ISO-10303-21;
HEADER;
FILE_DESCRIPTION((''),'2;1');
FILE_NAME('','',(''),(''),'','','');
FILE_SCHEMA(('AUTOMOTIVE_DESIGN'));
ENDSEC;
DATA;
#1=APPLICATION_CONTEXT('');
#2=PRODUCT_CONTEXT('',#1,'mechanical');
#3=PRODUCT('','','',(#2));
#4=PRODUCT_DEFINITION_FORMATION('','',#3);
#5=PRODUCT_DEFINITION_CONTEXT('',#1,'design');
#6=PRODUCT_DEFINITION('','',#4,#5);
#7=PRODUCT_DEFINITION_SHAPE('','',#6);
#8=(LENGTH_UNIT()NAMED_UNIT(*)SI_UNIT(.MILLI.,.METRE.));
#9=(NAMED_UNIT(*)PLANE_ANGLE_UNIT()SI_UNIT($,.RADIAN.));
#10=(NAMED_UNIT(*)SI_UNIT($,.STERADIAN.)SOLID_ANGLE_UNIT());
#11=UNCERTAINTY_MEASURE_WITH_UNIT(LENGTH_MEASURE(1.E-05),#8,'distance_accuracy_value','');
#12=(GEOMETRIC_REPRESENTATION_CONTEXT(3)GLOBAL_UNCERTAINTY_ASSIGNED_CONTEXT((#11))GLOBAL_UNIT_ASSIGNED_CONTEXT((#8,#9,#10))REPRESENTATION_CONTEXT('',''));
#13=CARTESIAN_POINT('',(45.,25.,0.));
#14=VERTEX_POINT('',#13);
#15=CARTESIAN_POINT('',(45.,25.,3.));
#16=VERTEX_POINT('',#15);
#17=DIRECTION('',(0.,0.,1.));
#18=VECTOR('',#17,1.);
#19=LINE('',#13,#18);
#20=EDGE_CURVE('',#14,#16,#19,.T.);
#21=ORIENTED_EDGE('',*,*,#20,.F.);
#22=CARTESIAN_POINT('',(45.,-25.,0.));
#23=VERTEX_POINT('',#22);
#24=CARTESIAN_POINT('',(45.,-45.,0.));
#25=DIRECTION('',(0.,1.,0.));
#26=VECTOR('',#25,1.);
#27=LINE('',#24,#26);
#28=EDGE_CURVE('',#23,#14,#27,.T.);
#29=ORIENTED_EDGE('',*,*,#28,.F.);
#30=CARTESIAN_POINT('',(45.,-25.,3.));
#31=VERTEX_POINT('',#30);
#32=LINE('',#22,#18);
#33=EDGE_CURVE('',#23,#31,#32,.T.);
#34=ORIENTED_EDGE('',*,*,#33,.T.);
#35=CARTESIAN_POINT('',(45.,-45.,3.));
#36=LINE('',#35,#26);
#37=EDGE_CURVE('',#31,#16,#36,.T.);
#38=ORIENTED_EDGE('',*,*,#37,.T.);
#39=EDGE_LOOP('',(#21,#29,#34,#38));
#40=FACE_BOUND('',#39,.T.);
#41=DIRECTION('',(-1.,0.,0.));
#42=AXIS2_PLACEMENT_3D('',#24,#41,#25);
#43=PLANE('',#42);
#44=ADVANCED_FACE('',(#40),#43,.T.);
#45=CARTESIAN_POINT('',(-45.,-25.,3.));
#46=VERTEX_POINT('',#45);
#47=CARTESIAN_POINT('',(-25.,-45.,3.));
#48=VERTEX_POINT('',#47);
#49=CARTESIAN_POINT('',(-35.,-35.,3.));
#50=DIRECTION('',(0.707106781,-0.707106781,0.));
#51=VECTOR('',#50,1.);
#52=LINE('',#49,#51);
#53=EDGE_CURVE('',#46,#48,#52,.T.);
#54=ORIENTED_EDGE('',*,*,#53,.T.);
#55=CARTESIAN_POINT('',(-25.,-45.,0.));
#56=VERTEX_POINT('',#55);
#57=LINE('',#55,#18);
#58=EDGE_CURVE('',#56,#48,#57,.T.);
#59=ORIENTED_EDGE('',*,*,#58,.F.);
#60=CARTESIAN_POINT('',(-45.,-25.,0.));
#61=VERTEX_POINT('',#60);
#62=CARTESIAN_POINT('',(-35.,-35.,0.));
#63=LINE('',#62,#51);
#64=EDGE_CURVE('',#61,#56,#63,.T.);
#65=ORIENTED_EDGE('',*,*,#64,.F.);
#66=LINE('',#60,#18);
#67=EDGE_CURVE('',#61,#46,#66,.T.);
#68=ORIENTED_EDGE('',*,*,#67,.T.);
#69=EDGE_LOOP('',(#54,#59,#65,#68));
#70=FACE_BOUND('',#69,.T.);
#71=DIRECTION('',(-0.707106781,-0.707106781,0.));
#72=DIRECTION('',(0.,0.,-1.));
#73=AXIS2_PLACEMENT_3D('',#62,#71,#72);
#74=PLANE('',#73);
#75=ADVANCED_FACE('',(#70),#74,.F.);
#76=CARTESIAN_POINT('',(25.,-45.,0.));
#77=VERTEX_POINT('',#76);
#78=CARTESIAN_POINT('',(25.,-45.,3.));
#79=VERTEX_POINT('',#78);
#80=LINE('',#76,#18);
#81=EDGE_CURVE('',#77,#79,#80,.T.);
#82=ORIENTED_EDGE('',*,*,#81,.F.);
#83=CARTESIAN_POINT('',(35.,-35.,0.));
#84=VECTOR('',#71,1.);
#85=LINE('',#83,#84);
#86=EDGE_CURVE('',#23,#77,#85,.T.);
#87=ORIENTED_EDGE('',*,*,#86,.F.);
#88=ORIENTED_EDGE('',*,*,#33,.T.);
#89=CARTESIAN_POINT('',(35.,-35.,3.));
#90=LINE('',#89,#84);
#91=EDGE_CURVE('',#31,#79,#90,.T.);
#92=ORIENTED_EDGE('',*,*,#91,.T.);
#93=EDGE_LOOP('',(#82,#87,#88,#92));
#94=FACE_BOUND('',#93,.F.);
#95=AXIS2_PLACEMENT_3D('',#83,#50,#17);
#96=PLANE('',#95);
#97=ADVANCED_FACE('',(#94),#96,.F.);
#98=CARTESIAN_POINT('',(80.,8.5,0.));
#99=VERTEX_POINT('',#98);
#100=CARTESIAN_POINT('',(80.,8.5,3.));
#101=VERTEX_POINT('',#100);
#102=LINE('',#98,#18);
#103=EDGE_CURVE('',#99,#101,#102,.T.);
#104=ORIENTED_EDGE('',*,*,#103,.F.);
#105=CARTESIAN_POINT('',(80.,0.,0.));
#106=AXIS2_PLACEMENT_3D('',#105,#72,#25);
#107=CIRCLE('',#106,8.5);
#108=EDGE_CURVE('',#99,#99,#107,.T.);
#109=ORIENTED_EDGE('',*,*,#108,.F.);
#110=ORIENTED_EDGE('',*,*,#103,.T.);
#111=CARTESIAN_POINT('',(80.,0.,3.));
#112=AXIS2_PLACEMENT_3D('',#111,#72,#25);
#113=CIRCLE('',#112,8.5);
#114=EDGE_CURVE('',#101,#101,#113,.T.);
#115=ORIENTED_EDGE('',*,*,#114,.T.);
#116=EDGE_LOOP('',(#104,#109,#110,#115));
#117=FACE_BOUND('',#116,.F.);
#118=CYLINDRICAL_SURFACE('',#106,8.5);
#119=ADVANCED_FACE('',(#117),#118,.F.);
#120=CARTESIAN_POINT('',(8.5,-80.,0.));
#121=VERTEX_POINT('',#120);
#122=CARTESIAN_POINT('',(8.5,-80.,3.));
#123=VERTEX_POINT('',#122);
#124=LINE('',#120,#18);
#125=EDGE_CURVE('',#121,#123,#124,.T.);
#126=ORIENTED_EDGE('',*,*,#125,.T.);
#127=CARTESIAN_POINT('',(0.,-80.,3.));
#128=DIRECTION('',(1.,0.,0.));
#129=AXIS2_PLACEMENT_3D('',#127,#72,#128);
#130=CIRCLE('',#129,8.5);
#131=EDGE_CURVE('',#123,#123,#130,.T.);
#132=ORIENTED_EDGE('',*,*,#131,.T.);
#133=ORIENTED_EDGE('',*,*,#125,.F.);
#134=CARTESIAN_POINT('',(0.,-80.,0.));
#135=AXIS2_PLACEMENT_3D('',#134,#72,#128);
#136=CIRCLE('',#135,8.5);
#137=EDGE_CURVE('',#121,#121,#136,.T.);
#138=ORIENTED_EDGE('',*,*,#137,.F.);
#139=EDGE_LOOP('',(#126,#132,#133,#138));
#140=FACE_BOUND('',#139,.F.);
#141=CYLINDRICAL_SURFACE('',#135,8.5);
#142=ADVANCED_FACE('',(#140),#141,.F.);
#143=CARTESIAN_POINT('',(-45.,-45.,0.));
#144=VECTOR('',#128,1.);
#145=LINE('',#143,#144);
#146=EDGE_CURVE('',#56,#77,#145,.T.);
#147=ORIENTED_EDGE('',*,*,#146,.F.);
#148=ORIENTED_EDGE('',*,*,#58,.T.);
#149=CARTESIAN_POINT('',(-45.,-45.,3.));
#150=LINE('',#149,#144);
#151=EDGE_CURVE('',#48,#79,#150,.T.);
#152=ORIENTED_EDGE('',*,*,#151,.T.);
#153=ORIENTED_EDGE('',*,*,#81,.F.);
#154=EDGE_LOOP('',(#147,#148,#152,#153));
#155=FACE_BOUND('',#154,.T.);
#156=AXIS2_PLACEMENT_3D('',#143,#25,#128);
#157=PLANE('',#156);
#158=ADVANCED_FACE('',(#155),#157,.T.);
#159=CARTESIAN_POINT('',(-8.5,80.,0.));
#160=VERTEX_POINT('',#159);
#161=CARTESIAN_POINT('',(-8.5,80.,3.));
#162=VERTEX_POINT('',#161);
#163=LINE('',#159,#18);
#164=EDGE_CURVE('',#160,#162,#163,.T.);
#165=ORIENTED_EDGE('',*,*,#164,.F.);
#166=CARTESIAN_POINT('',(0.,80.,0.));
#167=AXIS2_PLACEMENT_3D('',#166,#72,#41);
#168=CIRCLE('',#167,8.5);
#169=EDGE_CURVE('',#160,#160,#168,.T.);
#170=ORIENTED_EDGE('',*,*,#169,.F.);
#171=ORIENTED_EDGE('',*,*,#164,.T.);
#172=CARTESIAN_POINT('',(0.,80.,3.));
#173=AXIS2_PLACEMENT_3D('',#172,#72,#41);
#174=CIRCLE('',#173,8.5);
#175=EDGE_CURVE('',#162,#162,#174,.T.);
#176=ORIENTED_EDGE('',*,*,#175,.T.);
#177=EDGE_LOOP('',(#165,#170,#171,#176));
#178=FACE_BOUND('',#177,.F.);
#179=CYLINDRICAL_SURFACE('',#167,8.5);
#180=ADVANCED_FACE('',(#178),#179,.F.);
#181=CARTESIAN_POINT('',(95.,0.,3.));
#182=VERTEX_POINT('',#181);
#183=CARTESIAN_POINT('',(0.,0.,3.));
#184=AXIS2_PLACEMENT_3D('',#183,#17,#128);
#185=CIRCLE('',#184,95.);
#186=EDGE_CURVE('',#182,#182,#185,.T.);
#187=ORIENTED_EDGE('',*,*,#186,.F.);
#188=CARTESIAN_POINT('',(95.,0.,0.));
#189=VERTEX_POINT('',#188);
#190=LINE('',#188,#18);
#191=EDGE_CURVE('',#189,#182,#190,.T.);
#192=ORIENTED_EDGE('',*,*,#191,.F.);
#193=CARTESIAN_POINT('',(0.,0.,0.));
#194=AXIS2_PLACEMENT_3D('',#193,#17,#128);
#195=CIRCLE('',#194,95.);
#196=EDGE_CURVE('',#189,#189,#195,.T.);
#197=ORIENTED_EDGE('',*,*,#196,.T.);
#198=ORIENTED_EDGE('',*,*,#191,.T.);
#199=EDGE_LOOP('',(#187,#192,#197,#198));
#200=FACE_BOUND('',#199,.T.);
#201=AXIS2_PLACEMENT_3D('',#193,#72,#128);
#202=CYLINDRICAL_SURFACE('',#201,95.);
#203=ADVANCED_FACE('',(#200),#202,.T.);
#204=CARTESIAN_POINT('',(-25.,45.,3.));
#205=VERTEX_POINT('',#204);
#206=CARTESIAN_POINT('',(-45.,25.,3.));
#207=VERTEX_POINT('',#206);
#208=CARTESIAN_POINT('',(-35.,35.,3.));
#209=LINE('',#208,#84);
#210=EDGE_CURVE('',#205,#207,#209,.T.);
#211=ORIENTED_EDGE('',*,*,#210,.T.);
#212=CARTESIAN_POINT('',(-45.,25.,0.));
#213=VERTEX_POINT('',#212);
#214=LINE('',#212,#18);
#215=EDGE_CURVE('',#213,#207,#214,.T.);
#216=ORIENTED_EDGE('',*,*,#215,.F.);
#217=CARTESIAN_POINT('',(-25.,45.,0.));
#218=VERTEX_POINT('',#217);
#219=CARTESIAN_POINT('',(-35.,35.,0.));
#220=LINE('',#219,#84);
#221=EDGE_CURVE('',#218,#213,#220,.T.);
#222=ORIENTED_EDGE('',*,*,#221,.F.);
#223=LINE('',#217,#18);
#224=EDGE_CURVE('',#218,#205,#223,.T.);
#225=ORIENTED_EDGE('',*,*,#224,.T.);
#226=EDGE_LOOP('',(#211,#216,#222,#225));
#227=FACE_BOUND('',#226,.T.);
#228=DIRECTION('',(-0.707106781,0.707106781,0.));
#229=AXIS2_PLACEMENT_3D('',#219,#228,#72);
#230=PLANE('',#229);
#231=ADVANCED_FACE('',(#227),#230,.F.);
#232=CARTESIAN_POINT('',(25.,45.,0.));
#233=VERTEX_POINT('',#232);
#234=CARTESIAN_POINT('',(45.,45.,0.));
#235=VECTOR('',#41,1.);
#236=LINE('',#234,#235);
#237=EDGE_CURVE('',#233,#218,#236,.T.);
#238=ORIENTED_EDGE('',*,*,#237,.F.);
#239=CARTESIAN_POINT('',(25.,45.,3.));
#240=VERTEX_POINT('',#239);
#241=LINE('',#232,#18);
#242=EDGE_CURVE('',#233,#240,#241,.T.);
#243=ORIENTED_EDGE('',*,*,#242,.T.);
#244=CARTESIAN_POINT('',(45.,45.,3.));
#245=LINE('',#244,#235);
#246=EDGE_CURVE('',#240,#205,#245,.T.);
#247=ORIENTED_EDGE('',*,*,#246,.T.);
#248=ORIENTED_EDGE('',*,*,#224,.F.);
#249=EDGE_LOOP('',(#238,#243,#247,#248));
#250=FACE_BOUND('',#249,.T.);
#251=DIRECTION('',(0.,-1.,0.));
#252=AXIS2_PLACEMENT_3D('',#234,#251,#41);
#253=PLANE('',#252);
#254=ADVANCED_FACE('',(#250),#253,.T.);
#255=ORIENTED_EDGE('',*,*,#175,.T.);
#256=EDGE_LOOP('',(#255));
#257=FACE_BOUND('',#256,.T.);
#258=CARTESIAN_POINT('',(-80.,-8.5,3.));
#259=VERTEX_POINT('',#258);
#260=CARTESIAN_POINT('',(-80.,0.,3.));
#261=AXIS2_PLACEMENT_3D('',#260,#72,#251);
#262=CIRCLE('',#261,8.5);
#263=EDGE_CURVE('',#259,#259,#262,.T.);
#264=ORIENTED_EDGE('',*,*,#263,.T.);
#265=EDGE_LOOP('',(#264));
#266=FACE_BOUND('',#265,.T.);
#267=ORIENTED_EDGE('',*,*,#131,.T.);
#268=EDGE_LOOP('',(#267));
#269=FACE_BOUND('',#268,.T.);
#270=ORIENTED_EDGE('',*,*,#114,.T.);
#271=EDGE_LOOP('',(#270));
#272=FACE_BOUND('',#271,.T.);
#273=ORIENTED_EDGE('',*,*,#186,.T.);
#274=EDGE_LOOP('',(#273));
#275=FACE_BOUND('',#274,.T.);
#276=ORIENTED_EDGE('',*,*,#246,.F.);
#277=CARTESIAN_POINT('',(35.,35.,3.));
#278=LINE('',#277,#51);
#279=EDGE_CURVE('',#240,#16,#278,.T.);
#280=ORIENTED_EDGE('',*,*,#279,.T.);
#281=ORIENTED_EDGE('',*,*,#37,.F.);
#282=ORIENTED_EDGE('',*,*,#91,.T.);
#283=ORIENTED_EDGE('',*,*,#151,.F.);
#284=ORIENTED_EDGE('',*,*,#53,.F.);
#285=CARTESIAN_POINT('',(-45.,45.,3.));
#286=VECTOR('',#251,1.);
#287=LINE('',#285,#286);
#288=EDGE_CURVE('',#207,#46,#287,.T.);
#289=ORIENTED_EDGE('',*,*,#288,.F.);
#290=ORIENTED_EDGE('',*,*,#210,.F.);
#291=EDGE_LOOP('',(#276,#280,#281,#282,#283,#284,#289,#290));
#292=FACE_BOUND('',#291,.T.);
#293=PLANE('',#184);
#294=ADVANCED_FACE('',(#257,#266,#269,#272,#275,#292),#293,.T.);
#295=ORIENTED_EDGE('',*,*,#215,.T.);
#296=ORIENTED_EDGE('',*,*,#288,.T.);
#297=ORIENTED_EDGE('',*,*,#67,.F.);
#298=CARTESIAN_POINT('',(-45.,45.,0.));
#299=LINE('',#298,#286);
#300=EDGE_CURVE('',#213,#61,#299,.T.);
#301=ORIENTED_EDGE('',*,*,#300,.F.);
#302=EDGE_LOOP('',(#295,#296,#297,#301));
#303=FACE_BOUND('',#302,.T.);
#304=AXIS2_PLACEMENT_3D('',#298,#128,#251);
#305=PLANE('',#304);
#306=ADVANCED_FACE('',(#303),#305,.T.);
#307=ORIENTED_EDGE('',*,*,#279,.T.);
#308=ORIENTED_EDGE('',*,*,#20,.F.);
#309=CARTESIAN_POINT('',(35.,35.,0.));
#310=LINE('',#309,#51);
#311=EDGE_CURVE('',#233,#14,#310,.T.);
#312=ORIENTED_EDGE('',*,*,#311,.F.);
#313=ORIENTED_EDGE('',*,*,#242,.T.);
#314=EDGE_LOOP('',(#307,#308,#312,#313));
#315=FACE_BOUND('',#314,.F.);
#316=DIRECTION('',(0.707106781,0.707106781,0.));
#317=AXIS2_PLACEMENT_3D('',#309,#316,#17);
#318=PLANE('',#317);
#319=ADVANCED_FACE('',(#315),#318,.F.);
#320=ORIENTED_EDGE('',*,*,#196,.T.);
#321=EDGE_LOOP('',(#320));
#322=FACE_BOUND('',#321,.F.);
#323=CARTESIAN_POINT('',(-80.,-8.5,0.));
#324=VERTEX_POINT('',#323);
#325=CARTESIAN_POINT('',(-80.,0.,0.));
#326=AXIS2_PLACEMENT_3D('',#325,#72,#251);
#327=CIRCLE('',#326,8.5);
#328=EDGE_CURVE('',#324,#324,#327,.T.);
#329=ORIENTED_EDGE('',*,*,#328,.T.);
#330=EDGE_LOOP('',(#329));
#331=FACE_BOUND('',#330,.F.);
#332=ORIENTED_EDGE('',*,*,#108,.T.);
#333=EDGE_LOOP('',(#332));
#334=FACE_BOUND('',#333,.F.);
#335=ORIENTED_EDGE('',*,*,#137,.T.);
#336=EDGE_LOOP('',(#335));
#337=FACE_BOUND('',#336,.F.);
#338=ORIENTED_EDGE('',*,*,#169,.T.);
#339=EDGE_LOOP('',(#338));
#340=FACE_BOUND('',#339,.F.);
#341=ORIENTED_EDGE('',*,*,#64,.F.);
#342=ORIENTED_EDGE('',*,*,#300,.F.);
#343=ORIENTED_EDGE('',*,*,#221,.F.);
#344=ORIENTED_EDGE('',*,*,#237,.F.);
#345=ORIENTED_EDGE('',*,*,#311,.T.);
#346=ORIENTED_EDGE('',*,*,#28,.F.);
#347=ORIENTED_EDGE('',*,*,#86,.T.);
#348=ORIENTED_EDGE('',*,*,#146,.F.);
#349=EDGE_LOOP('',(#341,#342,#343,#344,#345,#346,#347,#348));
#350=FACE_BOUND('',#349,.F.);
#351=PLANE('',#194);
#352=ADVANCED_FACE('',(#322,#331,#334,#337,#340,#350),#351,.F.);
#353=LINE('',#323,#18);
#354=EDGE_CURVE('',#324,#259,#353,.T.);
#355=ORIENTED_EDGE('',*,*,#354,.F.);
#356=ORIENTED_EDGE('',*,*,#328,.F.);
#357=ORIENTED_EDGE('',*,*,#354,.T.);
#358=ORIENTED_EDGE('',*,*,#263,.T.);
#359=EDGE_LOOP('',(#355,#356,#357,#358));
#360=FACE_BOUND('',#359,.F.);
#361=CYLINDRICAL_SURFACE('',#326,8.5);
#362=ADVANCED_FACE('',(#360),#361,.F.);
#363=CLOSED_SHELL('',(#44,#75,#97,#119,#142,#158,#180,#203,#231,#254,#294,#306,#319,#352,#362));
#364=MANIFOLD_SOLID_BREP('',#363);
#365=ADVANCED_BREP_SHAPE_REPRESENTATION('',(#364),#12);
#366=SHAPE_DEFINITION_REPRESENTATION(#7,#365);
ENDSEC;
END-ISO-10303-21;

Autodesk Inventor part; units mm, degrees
ref_plane "YZ Plane" through (0, 0, 0) normal (1, 0, 0) x (0, 1, 0)
ref_plane "XZ Plane" through (0, 0, 0) normal (0, 1, 0) x (-1, 0, 0)
ref_plane "XY Plane" through (0, 0, 0) normal (0, 0, 1) x (1, 0, 0)
sketch "Sketch1" plane through (0, 0, 0) normal (0, 0, 1) x (1, 0, 0)
  circle A0 centre (0, 0) radius 95
  line L0 (45, 45) -> (-45, 45)
  line L1 (-45, 45) -> (-45, -45)
  line L2 (-45, -45) -> (45, -45)
  line L3 (45, -45) -> (45, 45)
  line L4 (45, 45) -> (-45, -45) construction
  line L5 (-45, 45) -> (45, -45) construction
  dimension "d157" = 190
  dimension "d158" = 90
  dimension "d159" = 90
extrude "Plate5" add sketch "Sketch1" along normal blind 3
sketch "Sketch7" plane through (0, 0, 0) normal (0, 0, -1) x (-1, 0, 0)
  circle A0 centre (0, 80) radius 8.5
  point P0 (0, 0)
  dimension "d160" = 17
  dimension "d161" = 80
extrude "Cut1" cut sketch "Sketch7" against normal blind 3
pattern_circular "Circular Pattern1" count 4 over 360 about axis through (0, 0, -10) along (0, 0, 1) of "Cut1"
chamfer "Corner Chamfer2" distance 20 angle 45 4 edges at (-45, -45, 1.5) (45, -45, 1.5) (-45, 45, 1.5) (45, 45, 1.5)
properties part number "PNS 754 FDS 1200 FLANGE" material "Stainless Steel"
